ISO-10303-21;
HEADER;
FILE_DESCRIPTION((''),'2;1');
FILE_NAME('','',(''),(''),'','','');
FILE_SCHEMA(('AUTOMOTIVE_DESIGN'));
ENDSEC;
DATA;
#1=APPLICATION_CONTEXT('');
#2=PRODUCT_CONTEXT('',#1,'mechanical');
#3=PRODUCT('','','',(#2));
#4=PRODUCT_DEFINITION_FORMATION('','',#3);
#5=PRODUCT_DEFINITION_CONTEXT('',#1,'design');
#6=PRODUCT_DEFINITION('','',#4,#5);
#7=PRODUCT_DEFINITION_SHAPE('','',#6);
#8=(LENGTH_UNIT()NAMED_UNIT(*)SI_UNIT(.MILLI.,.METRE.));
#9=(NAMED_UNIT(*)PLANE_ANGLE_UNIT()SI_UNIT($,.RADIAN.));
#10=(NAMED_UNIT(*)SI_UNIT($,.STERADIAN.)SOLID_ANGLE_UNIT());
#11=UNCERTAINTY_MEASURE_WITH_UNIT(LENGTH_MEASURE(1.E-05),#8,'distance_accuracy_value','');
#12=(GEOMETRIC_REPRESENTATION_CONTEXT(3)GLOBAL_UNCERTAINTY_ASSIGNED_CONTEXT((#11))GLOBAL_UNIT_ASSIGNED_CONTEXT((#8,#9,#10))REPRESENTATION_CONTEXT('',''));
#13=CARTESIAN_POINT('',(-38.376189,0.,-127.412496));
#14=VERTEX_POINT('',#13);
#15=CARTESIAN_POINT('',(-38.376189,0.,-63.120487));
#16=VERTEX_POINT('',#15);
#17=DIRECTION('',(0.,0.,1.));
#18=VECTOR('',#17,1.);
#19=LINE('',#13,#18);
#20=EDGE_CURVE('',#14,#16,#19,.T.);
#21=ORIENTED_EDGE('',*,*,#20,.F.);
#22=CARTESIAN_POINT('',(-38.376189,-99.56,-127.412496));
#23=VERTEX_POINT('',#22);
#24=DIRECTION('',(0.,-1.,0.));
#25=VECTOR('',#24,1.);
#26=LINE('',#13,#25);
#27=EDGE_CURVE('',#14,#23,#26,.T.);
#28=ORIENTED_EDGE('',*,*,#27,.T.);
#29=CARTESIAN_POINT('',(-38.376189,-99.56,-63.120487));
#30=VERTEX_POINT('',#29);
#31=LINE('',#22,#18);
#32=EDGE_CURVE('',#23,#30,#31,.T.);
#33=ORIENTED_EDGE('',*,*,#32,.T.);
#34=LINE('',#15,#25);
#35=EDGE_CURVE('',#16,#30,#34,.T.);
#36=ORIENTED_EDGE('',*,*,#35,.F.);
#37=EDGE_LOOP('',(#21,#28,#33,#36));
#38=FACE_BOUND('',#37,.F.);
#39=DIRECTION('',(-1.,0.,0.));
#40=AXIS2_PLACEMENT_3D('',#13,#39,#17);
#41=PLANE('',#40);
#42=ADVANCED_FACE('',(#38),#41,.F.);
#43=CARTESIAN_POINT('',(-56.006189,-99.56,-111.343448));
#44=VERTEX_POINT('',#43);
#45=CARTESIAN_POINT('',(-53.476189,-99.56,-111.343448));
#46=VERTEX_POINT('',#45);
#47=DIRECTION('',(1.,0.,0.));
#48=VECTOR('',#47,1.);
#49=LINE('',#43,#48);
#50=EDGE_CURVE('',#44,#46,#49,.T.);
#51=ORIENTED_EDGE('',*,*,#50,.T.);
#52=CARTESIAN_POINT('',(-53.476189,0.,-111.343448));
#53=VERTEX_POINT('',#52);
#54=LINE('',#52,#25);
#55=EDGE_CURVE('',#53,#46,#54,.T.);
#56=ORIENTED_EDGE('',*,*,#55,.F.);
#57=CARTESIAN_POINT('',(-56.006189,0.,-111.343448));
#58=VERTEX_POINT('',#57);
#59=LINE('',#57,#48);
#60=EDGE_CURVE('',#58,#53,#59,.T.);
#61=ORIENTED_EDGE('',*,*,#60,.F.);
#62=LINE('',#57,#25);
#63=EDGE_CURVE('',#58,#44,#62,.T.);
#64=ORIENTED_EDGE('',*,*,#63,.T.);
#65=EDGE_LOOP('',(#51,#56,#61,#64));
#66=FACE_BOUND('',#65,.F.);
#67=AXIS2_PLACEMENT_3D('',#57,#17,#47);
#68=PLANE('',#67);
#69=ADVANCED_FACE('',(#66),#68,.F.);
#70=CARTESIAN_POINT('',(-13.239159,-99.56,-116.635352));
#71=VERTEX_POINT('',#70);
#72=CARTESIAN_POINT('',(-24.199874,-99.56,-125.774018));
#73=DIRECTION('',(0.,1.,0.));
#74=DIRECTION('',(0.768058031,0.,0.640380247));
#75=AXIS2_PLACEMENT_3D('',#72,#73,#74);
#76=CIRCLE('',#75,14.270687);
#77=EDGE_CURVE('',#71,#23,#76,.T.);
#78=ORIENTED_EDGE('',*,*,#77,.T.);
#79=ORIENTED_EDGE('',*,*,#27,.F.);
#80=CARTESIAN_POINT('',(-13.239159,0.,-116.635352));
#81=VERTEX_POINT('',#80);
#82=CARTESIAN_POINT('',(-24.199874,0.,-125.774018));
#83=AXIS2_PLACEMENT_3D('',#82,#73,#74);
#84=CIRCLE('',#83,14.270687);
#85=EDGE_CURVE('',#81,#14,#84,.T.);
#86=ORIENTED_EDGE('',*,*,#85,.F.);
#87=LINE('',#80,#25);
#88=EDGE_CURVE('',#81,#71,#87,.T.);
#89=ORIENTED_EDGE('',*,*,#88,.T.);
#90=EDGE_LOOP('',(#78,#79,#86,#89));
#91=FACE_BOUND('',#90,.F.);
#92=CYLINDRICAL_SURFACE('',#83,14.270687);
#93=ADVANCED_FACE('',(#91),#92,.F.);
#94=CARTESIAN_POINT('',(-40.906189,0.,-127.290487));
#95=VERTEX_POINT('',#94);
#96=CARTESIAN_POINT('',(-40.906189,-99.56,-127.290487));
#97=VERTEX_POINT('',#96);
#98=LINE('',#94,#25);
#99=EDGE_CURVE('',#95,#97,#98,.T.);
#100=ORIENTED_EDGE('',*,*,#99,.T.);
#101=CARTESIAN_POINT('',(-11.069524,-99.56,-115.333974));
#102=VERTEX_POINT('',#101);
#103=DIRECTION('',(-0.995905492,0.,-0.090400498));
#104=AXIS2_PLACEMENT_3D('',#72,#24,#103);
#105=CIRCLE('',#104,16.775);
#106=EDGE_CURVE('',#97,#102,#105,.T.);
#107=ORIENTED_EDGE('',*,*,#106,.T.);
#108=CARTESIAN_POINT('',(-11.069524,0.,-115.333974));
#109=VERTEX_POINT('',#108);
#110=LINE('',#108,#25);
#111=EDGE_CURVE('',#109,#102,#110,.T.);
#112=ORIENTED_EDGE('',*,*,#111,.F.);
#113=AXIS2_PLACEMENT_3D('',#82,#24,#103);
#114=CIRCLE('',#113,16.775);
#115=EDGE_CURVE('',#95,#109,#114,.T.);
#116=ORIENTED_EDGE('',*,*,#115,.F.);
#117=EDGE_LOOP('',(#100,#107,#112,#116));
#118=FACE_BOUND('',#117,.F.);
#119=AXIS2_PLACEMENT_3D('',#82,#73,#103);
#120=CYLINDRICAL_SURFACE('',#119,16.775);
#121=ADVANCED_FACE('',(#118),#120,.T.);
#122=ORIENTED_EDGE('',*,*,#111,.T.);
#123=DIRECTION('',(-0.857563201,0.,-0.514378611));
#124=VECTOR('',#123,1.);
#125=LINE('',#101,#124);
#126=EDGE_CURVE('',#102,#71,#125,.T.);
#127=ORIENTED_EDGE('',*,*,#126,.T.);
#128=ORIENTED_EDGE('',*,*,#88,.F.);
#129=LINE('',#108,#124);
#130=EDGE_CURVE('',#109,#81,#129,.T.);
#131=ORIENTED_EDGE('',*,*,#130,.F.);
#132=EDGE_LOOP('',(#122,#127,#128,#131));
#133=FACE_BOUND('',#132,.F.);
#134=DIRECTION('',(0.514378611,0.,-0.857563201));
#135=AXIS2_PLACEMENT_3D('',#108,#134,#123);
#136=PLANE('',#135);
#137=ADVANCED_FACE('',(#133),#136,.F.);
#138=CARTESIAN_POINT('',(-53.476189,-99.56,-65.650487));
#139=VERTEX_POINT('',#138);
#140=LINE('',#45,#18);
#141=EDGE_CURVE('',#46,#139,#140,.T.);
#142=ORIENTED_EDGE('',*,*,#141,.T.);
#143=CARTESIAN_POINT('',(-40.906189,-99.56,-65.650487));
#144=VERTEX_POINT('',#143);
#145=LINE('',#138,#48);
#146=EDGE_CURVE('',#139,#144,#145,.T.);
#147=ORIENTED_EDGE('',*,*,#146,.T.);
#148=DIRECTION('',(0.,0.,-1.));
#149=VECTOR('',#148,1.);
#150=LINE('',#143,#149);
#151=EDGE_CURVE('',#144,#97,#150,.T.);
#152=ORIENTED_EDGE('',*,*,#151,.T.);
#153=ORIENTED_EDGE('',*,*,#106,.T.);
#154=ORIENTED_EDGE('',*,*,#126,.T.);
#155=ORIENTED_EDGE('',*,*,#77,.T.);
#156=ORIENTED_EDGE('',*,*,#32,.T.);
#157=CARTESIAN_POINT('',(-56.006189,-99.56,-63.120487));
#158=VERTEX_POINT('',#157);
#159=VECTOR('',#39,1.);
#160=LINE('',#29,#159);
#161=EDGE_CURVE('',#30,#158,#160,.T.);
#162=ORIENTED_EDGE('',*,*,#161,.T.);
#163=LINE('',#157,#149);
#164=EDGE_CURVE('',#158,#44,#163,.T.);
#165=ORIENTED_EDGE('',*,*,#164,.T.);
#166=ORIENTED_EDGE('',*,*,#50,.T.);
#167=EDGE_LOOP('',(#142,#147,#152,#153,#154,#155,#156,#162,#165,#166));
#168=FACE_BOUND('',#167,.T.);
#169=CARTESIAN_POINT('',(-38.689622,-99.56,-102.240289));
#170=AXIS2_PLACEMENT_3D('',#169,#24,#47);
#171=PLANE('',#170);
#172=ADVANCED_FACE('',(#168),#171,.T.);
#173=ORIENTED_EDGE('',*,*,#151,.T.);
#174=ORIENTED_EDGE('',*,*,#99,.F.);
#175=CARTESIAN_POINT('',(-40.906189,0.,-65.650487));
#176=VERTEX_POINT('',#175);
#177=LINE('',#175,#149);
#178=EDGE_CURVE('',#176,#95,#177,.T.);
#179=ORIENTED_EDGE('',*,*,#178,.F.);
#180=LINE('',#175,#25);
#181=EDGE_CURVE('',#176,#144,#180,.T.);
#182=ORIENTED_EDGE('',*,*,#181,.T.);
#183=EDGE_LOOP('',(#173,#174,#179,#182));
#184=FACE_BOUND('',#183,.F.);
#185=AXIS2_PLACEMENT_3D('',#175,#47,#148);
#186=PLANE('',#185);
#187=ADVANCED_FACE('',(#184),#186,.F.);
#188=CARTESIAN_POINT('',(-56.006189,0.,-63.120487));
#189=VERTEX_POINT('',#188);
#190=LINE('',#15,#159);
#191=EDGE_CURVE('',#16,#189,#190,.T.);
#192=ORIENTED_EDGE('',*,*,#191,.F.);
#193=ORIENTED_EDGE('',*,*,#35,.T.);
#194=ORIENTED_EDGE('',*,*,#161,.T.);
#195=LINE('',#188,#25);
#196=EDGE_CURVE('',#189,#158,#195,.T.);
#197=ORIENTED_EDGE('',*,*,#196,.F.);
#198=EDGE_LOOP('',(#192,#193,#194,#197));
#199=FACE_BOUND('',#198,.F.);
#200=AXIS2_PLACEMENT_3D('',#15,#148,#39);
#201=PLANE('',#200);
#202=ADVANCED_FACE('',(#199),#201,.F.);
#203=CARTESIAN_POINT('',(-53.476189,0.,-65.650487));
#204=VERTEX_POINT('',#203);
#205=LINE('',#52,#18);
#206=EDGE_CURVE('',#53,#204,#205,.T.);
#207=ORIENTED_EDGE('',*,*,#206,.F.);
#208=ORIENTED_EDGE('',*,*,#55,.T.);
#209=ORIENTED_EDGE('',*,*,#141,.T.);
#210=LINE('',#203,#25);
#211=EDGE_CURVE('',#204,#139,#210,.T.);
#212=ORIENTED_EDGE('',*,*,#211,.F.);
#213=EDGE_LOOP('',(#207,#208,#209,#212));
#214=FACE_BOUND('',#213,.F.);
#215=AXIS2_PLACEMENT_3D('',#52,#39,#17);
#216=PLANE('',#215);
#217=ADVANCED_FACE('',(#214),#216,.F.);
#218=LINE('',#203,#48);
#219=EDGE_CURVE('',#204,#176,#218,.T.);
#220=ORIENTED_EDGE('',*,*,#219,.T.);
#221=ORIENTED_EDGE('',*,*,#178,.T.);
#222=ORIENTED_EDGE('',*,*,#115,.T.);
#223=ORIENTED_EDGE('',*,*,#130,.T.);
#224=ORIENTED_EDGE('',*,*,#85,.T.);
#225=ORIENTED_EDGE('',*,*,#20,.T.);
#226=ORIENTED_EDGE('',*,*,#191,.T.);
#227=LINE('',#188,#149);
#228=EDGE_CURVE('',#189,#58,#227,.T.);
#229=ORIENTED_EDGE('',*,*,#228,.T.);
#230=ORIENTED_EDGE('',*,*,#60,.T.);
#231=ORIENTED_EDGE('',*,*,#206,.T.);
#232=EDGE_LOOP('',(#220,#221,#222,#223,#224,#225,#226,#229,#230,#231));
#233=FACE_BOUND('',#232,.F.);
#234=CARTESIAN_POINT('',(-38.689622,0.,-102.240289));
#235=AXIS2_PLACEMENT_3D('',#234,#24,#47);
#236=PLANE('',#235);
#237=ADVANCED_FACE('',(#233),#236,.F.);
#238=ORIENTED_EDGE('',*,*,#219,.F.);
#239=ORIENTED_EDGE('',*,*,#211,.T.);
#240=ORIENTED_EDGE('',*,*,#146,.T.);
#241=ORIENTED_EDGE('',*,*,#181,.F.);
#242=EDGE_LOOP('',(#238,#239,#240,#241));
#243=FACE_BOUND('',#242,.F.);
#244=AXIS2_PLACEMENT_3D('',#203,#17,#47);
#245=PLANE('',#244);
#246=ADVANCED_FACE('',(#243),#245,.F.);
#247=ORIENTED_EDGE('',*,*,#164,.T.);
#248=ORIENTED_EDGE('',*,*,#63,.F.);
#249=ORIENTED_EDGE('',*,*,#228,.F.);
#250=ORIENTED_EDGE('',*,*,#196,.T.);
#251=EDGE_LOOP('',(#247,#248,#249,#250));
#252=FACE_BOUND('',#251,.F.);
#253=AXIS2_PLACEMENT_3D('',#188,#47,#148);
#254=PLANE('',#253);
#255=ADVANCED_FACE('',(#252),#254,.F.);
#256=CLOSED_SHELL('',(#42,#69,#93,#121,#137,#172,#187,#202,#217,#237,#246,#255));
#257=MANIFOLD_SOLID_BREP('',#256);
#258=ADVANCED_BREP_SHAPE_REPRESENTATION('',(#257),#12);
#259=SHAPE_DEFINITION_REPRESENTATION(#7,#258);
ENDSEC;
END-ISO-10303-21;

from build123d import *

# Parameters (mm, degrees)
F1_DEPTH = 99.56


# Not quite as in the source:
# - the program builds the solid bodies; features that only make, move or delete a surface that nothing else refers to are left out


with BuildPart() as f1:
    # F0 (on Front) → F1 (new body)
    with BuildSketch(Plane.XZ):
        with BuildLine():
            Line((-53.4761890293, -65.6504866451), (-40.9061890293, -65.6504866451))
            Line((-40.9061890293, -65.6504866451), (-40.9061890293, -127.2904866451))
            ThreePointArc((-40.9061890293, -127.2904866451), (-17.9599684542, -141.3452802415), (-11.0695237566, -115.3339743614))
            Line((-11.0695237566, -115.3339743614), (-13.2391586559, -116.635352248))
            ThreePointArc((-13.2391586559, -116.635352248), (-18.5765544792, -138.8900687432), (-38.3761890293, -127.4124961715))
            Line((-38.3761890293, -127.4124961715), (-38.3761890293, -63.1204866451))
            Line((-38.3761890293, -63.1204866451), (-56.0061890293, -63.1204866451))
            Line((-56.0061890293, -63.1204866451), (-56.0061890293, -111.3434480185))
            Line((-56.0061890293, -111.3434480185), (-53.4761890293, -111.3434480185))
            Line((-53.4761890293, -111.3434480185), (-53.4761890293, -65.6504866451))
        make_face()
    extrude(amount=F1_DEPTH)


solid = f1.part
